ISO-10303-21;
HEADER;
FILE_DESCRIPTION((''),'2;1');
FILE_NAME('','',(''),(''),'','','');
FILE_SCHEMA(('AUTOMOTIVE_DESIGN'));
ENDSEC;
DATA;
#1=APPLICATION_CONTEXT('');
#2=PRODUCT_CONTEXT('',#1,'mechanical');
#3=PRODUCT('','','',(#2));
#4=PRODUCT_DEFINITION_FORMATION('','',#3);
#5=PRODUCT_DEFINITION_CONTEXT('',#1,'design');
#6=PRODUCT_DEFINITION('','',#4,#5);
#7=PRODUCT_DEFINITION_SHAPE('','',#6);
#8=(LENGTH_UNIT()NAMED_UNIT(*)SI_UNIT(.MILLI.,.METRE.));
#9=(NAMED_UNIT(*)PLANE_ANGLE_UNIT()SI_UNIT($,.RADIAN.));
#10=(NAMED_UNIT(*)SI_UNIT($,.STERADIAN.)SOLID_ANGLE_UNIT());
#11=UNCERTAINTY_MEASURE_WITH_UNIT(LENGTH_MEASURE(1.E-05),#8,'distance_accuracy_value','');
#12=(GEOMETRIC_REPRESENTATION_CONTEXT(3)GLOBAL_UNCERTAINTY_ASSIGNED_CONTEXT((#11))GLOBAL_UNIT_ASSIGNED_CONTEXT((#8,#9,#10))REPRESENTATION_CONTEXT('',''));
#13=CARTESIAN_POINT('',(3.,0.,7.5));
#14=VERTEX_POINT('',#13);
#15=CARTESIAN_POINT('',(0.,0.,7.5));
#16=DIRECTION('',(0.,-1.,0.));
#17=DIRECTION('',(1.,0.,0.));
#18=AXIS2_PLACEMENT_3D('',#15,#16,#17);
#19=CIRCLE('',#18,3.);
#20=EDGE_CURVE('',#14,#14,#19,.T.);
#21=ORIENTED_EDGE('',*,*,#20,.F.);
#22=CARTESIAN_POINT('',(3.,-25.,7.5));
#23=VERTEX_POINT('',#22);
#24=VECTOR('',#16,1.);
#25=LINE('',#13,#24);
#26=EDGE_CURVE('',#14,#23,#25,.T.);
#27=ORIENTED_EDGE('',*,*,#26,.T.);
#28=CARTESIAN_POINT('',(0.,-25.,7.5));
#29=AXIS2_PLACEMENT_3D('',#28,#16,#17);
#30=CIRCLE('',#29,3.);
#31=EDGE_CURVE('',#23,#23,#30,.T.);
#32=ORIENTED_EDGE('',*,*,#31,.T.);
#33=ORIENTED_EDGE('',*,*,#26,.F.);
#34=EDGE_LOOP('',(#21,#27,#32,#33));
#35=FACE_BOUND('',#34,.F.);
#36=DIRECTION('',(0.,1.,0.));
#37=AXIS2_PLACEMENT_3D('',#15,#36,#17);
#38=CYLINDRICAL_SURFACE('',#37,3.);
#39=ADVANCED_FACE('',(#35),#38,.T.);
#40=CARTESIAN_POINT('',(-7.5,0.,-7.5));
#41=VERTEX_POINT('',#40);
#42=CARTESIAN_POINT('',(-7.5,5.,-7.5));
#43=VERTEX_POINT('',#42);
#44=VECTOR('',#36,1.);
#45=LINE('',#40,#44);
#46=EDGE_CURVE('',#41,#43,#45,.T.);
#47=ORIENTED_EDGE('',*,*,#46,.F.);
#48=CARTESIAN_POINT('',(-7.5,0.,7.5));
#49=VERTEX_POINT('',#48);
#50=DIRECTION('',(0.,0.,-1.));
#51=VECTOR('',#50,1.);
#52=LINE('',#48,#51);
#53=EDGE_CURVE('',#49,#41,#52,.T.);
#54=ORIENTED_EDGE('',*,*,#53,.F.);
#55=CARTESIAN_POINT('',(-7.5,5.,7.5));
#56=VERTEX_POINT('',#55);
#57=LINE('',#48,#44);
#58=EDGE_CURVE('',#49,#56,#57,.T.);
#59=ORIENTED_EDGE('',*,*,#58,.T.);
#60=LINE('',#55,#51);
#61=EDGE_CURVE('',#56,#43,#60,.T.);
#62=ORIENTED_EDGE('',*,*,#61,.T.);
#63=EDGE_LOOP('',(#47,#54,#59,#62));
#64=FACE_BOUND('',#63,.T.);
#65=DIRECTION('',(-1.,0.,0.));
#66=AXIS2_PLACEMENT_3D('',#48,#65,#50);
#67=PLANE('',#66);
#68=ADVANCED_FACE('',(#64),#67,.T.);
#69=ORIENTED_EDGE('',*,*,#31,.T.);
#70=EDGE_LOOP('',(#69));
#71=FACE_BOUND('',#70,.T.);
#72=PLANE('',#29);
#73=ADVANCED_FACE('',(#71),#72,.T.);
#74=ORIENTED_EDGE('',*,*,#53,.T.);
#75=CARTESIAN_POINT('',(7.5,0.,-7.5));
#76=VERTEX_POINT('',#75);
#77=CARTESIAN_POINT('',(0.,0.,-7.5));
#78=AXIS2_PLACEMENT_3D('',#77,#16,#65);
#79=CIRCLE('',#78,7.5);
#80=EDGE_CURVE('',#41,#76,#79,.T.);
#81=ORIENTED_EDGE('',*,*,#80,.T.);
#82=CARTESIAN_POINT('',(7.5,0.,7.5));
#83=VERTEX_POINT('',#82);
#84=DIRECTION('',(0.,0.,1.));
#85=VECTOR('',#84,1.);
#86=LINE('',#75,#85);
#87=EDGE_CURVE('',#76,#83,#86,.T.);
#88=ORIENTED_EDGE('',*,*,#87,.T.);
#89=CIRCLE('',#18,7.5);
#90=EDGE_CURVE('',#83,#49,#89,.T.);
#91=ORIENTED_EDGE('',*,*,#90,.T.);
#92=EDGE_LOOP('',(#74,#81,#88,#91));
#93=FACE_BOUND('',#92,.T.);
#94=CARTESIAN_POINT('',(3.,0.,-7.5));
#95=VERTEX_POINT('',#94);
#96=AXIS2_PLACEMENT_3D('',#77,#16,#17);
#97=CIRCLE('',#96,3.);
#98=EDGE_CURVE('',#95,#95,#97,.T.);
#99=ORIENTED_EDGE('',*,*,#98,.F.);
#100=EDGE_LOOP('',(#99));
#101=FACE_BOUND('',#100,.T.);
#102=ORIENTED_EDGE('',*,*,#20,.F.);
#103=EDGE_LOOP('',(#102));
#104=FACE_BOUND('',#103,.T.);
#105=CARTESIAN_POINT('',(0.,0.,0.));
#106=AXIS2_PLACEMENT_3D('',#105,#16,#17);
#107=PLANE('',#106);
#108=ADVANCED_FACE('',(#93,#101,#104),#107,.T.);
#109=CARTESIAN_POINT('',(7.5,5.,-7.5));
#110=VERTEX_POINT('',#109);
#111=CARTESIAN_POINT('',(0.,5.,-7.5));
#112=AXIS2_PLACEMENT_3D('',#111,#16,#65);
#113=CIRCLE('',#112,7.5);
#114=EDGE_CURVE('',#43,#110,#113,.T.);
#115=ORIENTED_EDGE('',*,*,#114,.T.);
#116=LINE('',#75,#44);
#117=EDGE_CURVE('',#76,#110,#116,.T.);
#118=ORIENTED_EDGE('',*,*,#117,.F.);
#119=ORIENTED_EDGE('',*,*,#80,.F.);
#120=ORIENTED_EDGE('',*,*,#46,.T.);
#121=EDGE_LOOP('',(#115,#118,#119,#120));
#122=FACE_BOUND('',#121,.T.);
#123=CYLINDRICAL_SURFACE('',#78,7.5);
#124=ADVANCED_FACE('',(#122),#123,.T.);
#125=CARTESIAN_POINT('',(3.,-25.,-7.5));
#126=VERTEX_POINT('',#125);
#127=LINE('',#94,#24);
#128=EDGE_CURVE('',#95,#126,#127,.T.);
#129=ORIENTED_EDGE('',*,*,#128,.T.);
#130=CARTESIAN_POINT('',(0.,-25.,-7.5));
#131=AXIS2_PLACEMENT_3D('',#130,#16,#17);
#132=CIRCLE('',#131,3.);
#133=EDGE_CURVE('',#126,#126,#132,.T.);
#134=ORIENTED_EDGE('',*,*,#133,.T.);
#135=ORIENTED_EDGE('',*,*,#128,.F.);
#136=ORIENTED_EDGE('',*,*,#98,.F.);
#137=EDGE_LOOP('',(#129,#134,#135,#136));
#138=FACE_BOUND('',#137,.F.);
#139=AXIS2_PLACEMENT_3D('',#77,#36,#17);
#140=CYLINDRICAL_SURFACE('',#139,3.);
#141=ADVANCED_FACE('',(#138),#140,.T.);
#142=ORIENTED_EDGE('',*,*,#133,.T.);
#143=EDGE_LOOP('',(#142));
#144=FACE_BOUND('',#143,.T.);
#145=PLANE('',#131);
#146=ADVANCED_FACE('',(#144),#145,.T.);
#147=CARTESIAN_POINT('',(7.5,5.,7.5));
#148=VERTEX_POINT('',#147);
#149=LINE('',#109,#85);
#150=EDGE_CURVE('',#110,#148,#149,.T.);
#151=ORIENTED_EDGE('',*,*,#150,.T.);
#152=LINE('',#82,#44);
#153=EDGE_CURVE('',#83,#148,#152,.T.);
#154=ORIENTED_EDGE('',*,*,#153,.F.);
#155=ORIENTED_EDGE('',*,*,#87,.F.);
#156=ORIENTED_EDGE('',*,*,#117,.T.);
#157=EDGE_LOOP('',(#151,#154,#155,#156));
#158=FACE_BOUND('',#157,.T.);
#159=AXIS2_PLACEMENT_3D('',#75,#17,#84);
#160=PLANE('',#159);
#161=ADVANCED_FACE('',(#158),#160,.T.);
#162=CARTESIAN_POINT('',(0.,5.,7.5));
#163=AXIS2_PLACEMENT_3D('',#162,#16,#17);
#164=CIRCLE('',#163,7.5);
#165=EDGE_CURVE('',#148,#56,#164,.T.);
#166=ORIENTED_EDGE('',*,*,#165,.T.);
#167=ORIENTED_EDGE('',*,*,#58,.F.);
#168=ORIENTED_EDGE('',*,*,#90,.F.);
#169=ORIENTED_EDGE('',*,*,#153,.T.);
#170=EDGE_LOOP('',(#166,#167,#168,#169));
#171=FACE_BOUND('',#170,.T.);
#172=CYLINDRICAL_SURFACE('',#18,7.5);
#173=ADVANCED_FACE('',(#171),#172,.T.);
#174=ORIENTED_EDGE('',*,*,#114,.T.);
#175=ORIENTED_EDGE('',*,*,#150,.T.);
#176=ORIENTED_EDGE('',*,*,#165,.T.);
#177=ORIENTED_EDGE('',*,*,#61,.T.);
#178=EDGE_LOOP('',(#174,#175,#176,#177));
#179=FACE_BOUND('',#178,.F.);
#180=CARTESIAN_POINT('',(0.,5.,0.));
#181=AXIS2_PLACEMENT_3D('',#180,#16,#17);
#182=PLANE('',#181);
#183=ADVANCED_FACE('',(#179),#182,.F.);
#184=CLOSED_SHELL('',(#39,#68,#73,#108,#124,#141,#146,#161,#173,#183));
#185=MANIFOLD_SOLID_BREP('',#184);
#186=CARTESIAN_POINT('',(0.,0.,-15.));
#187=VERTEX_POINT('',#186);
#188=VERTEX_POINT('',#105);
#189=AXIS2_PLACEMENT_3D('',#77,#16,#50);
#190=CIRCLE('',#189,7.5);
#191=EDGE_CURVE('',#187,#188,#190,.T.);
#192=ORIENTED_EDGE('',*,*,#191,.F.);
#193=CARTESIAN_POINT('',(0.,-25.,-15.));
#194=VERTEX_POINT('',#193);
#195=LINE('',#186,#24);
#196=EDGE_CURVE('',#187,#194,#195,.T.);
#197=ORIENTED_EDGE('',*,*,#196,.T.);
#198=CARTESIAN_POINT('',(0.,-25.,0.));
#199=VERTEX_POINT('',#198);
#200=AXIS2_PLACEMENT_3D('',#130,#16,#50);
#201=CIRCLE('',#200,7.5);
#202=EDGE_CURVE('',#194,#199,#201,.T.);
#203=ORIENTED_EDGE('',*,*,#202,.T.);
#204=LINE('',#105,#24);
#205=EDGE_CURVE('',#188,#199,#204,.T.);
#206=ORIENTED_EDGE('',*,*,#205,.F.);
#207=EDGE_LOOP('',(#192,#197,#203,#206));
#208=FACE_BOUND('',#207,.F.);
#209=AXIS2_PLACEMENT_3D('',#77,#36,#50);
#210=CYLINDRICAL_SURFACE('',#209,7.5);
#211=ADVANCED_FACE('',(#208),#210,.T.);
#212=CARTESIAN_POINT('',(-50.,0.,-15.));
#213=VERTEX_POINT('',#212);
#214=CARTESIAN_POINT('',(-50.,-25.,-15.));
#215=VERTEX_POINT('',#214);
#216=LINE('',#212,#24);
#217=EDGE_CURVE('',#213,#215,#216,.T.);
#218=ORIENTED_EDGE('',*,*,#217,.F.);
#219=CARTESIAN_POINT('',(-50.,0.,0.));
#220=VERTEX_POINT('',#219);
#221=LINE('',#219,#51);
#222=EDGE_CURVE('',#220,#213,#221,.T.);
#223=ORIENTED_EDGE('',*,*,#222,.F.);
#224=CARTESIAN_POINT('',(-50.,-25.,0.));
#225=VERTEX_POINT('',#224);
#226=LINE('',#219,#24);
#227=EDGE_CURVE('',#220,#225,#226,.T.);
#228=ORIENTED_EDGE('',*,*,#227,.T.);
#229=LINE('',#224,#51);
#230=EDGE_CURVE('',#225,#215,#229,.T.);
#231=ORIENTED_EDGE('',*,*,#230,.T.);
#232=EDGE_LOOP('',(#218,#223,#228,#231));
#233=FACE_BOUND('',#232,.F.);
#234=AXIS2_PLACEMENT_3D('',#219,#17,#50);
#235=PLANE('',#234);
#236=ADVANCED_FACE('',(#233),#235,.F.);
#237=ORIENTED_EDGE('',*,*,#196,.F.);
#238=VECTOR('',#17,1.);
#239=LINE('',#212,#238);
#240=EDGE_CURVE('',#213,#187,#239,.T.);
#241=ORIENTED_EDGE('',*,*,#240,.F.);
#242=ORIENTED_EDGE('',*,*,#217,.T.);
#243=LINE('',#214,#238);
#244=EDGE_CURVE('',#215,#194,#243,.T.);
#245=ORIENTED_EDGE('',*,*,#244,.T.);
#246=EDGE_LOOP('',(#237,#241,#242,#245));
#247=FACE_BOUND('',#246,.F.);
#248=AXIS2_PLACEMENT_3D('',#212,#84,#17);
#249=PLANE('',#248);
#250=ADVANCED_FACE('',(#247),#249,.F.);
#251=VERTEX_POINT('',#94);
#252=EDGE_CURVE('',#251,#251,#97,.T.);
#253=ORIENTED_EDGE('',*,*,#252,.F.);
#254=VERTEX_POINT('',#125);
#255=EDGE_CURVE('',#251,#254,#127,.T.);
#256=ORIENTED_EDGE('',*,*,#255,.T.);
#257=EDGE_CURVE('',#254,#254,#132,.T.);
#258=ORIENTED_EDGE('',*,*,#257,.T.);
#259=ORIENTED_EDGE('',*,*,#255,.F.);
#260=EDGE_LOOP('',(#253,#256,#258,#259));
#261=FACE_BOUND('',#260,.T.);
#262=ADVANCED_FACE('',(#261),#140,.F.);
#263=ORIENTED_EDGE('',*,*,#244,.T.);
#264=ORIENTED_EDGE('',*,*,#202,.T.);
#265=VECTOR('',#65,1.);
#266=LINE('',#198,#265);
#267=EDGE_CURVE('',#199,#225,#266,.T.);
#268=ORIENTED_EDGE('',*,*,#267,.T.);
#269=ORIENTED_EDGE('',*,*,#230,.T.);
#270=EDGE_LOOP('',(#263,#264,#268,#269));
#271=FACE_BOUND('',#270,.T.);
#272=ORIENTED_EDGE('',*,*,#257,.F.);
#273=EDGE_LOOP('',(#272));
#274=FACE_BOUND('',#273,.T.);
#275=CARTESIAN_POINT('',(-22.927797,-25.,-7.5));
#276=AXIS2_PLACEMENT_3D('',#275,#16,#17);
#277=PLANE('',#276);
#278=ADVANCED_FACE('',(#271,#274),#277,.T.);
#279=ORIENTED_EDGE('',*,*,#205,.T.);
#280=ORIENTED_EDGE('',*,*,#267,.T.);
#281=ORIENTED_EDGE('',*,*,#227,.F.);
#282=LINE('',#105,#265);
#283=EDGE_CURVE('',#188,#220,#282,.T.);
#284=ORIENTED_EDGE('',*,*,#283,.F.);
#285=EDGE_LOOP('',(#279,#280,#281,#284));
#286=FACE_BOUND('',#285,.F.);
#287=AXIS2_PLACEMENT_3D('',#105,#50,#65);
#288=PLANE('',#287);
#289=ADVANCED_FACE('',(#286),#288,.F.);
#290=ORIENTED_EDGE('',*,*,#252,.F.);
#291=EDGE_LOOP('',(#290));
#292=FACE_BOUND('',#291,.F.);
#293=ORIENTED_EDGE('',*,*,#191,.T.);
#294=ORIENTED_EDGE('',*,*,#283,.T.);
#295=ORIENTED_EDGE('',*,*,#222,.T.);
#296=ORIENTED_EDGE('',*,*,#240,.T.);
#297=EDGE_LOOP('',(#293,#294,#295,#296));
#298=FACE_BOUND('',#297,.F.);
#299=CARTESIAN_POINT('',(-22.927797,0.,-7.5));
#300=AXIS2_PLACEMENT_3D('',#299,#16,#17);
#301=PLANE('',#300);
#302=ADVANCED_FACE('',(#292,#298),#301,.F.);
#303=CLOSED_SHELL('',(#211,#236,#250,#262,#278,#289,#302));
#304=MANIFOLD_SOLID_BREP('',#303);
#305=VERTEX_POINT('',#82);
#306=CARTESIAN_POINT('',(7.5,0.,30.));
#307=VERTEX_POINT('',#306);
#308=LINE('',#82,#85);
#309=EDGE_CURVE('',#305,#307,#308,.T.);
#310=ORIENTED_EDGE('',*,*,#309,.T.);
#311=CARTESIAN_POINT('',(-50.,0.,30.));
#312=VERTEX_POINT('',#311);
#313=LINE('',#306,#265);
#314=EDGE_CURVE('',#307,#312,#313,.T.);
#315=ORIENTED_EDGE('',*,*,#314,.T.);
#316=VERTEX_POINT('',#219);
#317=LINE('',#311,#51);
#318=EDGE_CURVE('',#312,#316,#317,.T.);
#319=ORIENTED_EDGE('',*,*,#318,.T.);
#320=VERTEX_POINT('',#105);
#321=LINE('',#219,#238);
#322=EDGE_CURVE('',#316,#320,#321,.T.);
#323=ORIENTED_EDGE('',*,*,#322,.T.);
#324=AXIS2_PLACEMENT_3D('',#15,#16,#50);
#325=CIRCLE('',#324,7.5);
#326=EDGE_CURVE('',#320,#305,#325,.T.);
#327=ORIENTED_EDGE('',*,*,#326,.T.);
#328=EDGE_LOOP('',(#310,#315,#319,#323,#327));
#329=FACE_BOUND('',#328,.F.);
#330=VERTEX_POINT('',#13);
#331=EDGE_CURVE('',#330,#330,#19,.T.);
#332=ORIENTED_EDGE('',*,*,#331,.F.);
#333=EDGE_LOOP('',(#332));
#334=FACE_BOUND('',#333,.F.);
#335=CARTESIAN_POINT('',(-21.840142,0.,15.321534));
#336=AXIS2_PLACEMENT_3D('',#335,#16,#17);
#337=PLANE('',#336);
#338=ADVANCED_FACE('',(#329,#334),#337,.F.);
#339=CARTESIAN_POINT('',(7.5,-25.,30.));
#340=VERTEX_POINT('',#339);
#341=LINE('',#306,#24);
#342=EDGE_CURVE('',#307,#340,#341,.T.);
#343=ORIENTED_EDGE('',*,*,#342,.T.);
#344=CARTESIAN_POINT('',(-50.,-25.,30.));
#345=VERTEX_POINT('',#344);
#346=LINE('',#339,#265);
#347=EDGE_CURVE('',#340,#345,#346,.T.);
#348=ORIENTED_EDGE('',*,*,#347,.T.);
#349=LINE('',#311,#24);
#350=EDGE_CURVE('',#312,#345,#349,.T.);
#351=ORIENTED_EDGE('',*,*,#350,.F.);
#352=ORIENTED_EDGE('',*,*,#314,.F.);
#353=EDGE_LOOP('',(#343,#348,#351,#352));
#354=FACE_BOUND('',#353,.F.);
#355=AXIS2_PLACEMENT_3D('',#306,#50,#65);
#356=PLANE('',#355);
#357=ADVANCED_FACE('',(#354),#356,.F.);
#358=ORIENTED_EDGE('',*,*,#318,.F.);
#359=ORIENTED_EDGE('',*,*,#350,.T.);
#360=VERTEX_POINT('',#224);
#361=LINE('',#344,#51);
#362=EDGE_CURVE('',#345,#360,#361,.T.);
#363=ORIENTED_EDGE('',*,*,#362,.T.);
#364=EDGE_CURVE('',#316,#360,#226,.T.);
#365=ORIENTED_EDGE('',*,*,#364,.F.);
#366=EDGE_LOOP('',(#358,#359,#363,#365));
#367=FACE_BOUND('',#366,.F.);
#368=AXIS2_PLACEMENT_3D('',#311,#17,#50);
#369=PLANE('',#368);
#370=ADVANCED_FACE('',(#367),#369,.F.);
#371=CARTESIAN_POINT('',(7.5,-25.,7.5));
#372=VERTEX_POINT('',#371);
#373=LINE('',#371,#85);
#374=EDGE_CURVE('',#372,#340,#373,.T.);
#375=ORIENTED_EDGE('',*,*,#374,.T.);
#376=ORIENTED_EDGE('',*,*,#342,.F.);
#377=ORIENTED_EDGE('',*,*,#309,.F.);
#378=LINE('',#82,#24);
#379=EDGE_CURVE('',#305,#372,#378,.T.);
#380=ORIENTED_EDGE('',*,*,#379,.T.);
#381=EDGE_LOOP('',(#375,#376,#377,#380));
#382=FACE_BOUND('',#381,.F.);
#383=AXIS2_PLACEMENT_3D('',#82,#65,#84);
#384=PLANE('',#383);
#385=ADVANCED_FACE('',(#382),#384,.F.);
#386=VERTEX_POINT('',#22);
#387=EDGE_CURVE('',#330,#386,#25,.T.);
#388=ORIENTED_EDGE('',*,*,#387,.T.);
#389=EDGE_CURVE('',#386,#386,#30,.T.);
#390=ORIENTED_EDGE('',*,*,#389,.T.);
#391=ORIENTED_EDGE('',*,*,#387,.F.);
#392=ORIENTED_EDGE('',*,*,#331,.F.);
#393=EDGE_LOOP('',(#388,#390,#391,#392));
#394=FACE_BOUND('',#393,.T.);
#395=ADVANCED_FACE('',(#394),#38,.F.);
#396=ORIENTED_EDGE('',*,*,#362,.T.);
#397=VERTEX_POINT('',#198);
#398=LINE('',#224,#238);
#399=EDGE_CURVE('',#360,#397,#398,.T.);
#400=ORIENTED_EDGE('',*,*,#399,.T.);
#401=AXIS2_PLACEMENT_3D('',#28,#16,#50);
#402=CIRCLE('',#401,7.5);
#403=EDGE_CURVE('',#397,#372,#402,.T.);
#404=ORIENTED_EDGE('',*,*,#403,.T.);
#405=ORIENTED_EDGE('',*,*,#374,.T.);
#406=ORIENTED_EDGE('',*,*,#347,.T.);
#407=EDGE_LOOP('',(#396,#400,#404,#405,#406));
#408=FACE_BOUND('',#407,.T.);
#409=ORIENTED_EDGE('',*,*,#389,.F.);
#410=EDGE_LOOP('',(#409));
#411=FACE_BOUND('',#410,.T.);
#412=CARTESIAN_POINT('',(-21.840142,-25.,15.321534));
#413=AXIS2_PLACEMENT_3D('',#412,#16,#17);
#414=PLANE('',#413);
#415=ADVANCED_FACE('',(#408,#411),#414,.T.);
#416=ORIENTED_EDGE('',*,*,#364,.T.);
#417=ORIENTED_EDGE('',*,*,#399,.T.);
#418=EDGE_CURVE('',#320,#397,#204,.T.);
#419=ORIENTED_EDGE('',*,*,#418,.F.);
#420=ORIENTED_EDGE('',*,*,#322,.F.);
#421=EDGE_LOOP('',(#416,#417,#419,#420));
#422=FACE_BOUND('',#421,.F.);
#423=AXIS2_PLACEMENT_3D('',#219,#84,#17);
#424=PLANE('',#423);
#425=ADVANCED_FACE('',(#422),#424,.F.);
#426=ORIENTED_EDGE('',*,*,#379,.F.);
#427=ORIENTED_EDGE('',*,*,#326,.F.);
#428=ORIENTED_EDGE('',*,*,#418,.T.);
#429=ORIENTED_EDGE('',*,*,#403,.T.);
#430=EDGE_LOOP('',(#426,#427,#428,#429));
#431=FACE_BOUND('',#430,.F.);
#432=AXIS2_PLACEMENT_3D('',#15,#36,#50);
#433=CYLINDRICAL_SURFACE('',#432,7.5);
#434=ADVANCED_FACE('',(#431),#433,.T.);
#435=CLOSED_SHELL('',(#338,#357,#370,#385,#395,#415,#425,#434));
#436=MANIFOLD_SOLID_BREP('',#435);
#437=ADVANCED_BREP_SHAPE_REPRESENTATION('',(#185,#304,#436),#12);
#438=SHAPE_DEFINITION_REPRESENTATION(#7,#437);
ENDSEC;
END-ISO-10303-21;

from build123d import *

# Parameters (mm, degrees)
F0_R     = 3
F1_DEPTH = 25
F2_DEPTH = 25
F3_DEPTH = 25
F5_DEPTH = 5


# Not quite as in the source:
# - a feature names something its author has since deleted; it is built from what else it names


with BuildPart() as f1:
    # F0 (on Front) → F1 (new body)
    with BuildSketch(Plane.XZ):
        with BuildLine():
            Line((-50, 0), (0, 0))
            ThreePointArc((0, 0), (5.3033008589, 2.1966991411), (7.5, 7.5))
            Line((7.5, 7.5), (7.5, 30))
            Line((7.5, 30), (-50, 30))
            Line((-50, 30), (-50, 15))
            Line((-50, 15), (-50, 0))
        make_face()
        with Locations((0, 7.5)):
            Circle(F0_R, mode=Mode.SUBTRACT)
    extrude(amount=F1_DEPTH)


with BuildPart() as f2:
    # F0 (on Front) → F2 (new body)
    with BuildSketch(Plane.XZ):
        with BuildLine():
            ThreePointArc((0, -15), (7.5, -7.5), (0, 0))
            Line((0, 0), (-50, 0))
            Line((-50, 0), (-50, -15))
            Line((-50, -15), (0, -15))
        make_face()
        with Locations((0, -7.5)):
            Circle(F0_R, mode=Mode.SUBTRACT)
    extrude(amount=F2_DEPTH)


with BuildPart() as f3:
    # F0 (on Front) → F3 (new body)
    with BuildSketch(Plane.XZ):
        with Locations((0, 7.5)):
            Circle(F0_R)
    extrude(amount=F3_DEPTH)



with BuildPart() as f3b:
    # F0 (on Front) → F3, piece 2 (new body)
    with BuildSketch(Plane.XZ):
        with Locations((0, -7.5)):
            Circle(F0_R)
    extrude(amount=F3_DEPTH)


with BuildPart() as f3_1:
    add(f3.part)

    add(f3b.part)  # F5 merges F3b
    # F4 (on Front) → F5 (join)
    with BuildSketch(Plane.XZ):
        with BuildLine():
            ThreePointArc((7.5, 7.5), (5.3033008589, 12.8033008589), (0, 15))
            ThreePointArc((0, 15), (-5.3033008589, 12.8033008589), (-7.5, 7.5))
            Line((-7.5, 7.5), (-7.5, -7.5))
            ThreePointArc((-7.5, -7.5), (-5.3033008589, -12.8033008589), (0, -15))
            ThreePointArc((0, -15), (5.3033008589, -12.8033008589), (7.5, -7.5))
            Line((7.5, -7.5), (7.5, 7.5))
        make_face()
    extrude(amount=-F5_DEPTH)


solid = Compound([f1.part, f2.part, f3_1.part])
